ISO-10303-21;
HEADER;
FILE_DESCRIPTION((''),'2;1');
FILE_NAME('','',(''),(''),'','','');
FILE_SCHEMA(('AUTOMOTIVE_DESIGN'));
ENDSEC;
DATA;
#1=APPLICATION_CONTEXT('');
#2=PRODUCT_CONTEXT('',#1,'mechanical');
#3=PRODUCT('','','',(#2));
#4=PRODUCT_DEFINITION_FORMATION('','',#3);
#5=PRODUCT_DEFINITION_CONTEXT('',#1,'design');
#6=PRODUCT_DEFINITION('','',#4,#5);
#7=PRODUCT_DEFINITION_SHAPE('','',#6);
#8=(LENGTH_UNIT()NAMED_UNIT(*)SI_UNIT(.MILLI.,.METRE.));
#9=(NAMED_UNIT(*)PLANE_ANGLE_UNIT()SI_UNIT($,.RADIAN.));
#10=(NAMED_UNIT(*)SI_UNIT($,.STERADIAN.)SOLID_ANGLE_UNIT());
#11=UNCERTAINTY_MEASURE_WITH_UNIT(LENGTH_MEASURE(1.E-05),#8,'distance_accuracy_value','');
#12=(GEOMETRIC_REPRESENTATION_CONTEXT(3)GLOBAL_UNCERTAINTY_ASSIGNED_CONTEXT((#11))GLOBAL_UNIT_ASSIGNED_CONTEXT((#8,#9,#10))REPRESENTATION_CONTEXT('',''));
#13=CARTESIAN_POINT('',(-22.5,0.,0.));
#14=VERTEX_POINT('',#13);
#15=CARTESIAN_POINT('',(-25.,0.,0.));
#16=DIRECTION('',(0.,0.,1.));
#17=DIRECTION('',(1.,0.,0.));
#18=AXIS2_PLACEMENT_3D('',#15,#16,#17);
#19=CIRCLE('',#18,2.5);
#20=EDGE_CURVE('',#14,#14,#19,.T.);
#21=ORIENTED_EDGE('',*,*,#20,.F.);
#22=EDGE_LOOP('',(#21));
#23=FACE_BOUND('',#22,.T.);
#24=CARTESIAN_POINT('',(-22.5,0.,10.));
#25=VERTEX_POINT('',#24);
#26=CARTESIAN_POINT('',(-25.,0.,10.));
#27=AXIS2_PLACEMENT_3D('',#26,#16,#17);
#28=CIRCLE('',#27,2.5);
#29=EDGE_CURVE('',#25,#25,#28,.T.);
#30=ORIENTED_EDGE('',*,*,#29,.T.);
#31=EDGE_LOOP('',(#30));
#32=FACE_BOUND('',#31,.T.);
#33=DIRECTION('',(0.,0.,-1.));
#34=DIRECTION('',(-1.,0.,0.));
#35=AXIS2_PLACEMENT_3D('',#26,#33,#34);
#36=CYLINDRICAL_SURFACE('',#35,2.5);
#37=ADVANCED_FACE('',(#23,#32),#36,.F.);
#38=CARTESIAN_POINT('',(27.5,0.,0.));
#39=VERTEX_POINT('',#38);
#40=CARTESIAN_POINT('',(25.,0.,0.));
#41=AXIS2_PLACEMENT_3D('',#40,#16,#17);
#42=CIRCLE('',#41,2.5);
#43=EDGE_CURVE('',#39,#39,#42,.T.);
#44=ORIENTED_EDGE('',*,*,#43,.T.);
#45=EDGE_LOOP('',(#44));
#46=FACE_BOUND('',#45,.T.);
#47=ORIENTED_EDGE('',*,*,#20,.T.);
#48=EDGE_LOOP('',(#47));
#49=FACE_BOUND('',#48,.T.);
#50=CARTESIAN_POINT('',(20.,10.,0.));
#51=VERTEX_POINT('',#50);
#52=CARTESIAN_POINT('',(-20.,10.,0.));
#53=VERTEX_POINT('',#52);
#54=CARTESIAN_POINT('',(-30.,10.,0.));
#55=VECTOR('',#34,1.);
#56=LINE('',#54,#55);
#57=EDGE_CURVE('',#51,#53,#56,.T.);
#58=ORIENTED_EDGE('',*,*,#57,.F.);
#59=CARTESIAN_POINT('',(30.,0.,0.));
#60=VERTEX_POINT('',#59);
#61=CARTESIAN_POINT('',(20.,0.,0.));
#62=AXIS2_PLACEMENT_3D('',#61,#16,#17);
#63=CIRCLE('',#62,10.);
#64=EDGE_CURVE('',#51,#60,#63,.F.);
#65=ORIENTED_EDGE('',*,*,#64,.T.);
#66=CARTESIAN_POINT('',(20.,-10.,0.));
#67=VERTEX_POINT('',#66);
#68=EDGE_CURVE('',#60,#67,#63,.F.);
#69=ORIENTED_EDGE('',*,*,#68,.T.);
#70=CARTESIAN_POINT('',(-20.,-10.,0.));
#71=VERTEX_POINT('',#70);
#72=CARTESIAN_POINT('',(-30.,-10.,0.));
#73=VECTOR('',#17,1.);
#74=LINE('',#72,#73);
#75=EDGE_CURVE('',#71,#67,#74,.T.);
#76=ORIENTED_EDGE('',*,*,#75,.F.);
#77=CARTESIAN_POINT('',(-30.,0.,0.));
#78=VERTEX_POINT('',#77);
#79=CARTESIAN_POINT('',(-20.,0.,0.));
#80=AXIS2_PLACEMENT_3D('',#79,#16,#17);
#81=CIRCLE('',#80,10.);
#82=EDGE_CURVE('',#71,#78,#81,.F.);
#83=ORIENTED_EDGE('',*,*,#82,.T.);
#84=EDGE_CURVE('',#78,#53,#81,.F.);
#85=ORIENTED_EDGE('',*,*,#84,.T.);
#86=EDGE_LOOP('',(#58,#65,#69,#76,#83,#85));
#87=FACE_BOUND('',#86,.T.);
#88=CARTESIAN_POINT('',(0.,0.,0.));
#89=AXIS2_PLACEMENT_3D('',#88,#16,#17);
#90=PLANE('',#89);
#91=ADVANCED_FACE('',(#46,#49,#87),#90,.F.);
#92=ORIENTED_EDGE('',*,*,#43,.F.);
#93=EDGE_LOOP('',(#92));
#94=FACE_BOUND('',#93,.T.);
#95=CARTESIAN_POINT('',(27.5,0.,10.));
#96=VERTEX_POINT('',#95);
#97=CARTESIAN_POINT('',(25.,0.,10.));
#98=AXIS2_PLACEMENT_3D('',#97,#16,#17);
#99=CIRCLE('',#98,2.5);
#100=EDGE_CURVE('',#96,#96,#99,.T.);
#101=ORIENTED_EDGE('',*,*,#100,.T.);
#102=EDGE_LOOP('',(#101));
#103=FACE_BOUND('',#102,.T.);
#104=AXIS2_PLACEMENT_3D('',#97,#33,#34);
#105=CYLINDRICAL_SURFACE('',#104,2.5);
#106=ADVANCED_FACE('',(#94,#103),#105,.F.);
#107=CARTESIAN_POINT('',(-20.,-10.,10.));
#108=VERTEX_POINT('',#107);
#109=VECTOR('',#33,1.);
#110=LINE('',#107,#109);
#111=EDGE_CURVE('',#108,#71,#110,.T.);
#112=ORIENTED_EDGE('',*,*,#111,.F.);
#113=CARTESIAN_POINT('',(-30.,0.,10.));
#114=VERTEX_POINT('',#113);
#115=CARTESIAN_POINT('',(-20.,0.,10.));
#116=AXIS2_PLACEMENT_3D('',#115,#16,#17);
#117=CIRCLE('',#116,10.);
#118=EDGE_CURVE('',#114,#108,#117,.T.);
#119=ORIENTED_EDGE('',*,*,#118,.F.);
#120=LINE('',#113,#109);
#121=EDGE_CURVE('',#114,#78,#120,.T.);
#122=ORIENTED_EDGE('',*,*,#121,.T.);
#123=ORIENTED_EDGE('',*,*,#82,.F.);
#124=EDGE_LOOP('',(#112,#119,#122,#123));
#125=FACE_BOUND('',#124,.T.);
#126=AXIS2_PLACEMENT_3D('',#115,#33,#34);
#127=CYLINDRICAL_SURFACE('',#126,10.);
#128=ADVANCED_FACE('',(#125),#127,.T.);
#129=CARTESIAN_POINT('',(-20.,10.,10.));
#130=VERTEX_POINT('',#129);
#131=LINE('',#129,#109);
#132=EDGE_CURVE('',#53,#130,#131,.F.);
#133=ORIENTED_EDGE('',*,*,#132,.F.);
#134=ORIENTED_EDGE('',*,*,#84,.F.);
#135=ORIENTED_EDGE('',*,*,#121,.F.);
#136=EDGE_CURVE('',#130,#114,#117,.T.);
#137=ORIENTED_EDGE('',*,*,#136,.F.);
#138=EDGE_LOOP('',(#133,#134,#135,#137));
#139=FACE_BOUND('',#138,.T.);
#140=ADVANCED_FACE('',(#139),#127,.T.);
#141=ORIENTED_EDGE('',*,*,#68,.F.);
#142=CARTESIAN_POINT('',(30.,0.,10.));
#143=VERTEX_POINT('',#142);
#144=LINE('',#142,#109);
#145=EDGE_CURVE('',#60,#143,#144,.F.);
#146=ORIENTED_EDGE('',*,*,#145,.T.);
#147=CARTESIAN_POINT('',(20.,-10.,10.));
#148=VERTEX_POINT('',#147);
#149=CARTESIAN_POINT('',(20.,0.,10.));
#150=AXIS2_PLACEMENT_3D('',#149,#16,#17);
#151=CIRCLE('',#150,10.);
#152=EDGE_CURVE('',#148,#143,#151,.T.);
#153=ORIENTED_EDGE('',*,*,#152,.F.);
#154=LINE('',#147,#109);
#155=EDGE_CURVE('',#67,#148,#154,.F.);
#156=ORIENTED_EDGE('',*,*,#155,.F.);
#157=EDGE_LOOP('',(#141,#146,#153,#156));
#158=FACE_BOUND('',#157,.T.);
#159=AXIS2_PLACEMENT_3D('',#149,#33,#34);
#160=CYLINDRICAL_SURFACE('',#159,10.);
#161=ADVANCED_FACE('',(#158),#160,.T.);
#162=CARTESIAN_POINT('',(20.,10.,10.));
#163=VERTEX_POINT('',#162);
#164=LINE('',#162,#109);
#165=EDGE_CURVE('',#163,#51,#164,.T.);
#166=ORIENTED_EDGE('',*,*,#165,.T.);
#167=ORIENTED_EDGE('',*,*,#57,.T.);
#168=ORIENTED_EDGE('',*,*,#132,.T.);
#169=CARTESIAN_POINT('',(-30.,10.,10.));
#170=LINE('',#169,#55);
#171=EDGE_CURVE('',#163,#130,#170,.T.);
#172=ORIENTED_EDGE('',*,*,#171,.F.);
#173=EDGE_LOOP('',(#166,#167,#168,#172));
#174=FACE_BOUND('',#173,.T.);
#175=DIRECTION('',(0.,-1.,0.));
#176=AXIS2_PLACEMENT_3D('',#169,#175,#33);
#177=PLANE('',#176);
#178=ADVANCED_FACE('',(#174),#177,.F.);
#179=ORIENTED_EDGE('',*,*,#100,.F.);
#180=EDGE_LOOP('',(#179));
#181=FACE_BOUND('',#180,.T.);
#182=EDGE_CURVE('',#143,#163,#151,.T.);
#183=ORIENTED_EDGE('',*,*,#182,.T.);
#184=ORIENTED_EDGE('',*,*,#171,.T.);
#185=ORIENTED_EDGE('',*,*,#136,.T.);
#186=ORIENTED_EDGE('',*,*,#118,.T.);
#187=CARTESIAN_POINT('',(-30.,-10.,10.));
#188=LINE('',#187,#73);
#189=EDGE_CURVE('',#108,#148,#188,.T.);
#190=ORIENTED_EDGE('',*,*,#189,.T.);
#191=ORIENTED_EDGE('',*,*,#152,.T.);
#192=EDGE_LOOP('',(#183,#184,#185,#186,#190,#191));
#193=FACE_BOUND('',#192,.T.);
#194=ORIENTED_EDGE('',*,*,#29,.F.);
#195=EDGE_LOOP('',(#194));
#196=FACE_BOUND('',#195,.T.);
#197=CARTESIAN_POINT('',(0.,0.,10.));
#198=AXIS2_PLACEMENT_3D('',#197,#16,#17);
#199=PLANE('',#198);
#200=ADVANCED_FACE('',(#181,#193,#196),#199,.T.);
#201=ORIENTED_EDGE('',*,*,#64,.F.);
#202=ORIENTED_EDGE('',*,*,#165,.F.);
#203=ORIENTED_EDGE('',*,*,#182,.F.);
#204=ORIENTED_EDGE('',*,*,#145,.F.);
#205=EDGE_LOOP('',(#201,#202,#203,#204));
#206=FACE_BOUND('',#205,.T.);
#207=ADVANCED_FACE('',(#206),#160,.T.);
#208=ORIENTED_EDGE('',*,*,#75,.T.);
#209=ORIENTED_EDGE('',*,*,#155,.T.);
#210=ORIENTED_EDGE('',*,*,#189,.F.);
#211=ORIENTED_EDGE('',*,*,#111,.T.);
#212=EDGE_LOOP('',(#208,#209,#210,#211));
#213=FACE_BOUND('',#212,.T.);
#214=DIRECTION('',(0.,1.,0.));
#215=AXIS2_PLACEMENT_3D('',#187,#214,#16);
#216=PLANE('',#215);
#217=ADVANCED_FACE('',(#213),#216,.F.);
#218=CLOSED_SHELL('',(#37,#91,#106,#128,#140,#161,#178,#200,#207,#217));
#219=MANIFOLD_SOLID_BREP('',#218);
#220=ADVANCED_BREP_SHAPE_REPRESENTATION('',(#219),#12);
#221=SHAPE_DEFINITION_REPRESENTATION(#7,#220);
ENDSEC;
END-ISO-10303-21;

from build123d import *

# Parameters (mm, degrees)
SKETCH1_W           = 60
SKETCH1_H           = 20
SKETCH1_R           = 2.5
BOSS_EXTRUDE1_DEPTH = 10
FILLET1_R           = 10


with BuildPart() as part:
    # Sketch1 → Boss-Extrude1 (new body)
    with BuildSketch(Plane.XY):
        Rectangle(SKETCH1_W, SKETCH1_H)
        with Locations((-25, 0)):
            Circle(SKETCH1_R, mode=Mode.SUBTRACT)
        with Locations((25, 0)):
            Circle(SKETCH1_R, mode=Mode.SUBTRACT)
    extrude(amount=BOSS_EXTRUDE1_DEPTH)

    # Fillet1
    fillet1_edges = [part.edges().sort_by_distance(p)[0] for p in [
        (30, -10, 5),
        (30, 10, 5),
        (-30, -10, 5),
        (-30, 10, 5),
    ]]
    fillet(fillet1_edges, radius=FILLET1_R - 0.0001)  # a hair under: the kernel refuses the full size


solid = part.part
